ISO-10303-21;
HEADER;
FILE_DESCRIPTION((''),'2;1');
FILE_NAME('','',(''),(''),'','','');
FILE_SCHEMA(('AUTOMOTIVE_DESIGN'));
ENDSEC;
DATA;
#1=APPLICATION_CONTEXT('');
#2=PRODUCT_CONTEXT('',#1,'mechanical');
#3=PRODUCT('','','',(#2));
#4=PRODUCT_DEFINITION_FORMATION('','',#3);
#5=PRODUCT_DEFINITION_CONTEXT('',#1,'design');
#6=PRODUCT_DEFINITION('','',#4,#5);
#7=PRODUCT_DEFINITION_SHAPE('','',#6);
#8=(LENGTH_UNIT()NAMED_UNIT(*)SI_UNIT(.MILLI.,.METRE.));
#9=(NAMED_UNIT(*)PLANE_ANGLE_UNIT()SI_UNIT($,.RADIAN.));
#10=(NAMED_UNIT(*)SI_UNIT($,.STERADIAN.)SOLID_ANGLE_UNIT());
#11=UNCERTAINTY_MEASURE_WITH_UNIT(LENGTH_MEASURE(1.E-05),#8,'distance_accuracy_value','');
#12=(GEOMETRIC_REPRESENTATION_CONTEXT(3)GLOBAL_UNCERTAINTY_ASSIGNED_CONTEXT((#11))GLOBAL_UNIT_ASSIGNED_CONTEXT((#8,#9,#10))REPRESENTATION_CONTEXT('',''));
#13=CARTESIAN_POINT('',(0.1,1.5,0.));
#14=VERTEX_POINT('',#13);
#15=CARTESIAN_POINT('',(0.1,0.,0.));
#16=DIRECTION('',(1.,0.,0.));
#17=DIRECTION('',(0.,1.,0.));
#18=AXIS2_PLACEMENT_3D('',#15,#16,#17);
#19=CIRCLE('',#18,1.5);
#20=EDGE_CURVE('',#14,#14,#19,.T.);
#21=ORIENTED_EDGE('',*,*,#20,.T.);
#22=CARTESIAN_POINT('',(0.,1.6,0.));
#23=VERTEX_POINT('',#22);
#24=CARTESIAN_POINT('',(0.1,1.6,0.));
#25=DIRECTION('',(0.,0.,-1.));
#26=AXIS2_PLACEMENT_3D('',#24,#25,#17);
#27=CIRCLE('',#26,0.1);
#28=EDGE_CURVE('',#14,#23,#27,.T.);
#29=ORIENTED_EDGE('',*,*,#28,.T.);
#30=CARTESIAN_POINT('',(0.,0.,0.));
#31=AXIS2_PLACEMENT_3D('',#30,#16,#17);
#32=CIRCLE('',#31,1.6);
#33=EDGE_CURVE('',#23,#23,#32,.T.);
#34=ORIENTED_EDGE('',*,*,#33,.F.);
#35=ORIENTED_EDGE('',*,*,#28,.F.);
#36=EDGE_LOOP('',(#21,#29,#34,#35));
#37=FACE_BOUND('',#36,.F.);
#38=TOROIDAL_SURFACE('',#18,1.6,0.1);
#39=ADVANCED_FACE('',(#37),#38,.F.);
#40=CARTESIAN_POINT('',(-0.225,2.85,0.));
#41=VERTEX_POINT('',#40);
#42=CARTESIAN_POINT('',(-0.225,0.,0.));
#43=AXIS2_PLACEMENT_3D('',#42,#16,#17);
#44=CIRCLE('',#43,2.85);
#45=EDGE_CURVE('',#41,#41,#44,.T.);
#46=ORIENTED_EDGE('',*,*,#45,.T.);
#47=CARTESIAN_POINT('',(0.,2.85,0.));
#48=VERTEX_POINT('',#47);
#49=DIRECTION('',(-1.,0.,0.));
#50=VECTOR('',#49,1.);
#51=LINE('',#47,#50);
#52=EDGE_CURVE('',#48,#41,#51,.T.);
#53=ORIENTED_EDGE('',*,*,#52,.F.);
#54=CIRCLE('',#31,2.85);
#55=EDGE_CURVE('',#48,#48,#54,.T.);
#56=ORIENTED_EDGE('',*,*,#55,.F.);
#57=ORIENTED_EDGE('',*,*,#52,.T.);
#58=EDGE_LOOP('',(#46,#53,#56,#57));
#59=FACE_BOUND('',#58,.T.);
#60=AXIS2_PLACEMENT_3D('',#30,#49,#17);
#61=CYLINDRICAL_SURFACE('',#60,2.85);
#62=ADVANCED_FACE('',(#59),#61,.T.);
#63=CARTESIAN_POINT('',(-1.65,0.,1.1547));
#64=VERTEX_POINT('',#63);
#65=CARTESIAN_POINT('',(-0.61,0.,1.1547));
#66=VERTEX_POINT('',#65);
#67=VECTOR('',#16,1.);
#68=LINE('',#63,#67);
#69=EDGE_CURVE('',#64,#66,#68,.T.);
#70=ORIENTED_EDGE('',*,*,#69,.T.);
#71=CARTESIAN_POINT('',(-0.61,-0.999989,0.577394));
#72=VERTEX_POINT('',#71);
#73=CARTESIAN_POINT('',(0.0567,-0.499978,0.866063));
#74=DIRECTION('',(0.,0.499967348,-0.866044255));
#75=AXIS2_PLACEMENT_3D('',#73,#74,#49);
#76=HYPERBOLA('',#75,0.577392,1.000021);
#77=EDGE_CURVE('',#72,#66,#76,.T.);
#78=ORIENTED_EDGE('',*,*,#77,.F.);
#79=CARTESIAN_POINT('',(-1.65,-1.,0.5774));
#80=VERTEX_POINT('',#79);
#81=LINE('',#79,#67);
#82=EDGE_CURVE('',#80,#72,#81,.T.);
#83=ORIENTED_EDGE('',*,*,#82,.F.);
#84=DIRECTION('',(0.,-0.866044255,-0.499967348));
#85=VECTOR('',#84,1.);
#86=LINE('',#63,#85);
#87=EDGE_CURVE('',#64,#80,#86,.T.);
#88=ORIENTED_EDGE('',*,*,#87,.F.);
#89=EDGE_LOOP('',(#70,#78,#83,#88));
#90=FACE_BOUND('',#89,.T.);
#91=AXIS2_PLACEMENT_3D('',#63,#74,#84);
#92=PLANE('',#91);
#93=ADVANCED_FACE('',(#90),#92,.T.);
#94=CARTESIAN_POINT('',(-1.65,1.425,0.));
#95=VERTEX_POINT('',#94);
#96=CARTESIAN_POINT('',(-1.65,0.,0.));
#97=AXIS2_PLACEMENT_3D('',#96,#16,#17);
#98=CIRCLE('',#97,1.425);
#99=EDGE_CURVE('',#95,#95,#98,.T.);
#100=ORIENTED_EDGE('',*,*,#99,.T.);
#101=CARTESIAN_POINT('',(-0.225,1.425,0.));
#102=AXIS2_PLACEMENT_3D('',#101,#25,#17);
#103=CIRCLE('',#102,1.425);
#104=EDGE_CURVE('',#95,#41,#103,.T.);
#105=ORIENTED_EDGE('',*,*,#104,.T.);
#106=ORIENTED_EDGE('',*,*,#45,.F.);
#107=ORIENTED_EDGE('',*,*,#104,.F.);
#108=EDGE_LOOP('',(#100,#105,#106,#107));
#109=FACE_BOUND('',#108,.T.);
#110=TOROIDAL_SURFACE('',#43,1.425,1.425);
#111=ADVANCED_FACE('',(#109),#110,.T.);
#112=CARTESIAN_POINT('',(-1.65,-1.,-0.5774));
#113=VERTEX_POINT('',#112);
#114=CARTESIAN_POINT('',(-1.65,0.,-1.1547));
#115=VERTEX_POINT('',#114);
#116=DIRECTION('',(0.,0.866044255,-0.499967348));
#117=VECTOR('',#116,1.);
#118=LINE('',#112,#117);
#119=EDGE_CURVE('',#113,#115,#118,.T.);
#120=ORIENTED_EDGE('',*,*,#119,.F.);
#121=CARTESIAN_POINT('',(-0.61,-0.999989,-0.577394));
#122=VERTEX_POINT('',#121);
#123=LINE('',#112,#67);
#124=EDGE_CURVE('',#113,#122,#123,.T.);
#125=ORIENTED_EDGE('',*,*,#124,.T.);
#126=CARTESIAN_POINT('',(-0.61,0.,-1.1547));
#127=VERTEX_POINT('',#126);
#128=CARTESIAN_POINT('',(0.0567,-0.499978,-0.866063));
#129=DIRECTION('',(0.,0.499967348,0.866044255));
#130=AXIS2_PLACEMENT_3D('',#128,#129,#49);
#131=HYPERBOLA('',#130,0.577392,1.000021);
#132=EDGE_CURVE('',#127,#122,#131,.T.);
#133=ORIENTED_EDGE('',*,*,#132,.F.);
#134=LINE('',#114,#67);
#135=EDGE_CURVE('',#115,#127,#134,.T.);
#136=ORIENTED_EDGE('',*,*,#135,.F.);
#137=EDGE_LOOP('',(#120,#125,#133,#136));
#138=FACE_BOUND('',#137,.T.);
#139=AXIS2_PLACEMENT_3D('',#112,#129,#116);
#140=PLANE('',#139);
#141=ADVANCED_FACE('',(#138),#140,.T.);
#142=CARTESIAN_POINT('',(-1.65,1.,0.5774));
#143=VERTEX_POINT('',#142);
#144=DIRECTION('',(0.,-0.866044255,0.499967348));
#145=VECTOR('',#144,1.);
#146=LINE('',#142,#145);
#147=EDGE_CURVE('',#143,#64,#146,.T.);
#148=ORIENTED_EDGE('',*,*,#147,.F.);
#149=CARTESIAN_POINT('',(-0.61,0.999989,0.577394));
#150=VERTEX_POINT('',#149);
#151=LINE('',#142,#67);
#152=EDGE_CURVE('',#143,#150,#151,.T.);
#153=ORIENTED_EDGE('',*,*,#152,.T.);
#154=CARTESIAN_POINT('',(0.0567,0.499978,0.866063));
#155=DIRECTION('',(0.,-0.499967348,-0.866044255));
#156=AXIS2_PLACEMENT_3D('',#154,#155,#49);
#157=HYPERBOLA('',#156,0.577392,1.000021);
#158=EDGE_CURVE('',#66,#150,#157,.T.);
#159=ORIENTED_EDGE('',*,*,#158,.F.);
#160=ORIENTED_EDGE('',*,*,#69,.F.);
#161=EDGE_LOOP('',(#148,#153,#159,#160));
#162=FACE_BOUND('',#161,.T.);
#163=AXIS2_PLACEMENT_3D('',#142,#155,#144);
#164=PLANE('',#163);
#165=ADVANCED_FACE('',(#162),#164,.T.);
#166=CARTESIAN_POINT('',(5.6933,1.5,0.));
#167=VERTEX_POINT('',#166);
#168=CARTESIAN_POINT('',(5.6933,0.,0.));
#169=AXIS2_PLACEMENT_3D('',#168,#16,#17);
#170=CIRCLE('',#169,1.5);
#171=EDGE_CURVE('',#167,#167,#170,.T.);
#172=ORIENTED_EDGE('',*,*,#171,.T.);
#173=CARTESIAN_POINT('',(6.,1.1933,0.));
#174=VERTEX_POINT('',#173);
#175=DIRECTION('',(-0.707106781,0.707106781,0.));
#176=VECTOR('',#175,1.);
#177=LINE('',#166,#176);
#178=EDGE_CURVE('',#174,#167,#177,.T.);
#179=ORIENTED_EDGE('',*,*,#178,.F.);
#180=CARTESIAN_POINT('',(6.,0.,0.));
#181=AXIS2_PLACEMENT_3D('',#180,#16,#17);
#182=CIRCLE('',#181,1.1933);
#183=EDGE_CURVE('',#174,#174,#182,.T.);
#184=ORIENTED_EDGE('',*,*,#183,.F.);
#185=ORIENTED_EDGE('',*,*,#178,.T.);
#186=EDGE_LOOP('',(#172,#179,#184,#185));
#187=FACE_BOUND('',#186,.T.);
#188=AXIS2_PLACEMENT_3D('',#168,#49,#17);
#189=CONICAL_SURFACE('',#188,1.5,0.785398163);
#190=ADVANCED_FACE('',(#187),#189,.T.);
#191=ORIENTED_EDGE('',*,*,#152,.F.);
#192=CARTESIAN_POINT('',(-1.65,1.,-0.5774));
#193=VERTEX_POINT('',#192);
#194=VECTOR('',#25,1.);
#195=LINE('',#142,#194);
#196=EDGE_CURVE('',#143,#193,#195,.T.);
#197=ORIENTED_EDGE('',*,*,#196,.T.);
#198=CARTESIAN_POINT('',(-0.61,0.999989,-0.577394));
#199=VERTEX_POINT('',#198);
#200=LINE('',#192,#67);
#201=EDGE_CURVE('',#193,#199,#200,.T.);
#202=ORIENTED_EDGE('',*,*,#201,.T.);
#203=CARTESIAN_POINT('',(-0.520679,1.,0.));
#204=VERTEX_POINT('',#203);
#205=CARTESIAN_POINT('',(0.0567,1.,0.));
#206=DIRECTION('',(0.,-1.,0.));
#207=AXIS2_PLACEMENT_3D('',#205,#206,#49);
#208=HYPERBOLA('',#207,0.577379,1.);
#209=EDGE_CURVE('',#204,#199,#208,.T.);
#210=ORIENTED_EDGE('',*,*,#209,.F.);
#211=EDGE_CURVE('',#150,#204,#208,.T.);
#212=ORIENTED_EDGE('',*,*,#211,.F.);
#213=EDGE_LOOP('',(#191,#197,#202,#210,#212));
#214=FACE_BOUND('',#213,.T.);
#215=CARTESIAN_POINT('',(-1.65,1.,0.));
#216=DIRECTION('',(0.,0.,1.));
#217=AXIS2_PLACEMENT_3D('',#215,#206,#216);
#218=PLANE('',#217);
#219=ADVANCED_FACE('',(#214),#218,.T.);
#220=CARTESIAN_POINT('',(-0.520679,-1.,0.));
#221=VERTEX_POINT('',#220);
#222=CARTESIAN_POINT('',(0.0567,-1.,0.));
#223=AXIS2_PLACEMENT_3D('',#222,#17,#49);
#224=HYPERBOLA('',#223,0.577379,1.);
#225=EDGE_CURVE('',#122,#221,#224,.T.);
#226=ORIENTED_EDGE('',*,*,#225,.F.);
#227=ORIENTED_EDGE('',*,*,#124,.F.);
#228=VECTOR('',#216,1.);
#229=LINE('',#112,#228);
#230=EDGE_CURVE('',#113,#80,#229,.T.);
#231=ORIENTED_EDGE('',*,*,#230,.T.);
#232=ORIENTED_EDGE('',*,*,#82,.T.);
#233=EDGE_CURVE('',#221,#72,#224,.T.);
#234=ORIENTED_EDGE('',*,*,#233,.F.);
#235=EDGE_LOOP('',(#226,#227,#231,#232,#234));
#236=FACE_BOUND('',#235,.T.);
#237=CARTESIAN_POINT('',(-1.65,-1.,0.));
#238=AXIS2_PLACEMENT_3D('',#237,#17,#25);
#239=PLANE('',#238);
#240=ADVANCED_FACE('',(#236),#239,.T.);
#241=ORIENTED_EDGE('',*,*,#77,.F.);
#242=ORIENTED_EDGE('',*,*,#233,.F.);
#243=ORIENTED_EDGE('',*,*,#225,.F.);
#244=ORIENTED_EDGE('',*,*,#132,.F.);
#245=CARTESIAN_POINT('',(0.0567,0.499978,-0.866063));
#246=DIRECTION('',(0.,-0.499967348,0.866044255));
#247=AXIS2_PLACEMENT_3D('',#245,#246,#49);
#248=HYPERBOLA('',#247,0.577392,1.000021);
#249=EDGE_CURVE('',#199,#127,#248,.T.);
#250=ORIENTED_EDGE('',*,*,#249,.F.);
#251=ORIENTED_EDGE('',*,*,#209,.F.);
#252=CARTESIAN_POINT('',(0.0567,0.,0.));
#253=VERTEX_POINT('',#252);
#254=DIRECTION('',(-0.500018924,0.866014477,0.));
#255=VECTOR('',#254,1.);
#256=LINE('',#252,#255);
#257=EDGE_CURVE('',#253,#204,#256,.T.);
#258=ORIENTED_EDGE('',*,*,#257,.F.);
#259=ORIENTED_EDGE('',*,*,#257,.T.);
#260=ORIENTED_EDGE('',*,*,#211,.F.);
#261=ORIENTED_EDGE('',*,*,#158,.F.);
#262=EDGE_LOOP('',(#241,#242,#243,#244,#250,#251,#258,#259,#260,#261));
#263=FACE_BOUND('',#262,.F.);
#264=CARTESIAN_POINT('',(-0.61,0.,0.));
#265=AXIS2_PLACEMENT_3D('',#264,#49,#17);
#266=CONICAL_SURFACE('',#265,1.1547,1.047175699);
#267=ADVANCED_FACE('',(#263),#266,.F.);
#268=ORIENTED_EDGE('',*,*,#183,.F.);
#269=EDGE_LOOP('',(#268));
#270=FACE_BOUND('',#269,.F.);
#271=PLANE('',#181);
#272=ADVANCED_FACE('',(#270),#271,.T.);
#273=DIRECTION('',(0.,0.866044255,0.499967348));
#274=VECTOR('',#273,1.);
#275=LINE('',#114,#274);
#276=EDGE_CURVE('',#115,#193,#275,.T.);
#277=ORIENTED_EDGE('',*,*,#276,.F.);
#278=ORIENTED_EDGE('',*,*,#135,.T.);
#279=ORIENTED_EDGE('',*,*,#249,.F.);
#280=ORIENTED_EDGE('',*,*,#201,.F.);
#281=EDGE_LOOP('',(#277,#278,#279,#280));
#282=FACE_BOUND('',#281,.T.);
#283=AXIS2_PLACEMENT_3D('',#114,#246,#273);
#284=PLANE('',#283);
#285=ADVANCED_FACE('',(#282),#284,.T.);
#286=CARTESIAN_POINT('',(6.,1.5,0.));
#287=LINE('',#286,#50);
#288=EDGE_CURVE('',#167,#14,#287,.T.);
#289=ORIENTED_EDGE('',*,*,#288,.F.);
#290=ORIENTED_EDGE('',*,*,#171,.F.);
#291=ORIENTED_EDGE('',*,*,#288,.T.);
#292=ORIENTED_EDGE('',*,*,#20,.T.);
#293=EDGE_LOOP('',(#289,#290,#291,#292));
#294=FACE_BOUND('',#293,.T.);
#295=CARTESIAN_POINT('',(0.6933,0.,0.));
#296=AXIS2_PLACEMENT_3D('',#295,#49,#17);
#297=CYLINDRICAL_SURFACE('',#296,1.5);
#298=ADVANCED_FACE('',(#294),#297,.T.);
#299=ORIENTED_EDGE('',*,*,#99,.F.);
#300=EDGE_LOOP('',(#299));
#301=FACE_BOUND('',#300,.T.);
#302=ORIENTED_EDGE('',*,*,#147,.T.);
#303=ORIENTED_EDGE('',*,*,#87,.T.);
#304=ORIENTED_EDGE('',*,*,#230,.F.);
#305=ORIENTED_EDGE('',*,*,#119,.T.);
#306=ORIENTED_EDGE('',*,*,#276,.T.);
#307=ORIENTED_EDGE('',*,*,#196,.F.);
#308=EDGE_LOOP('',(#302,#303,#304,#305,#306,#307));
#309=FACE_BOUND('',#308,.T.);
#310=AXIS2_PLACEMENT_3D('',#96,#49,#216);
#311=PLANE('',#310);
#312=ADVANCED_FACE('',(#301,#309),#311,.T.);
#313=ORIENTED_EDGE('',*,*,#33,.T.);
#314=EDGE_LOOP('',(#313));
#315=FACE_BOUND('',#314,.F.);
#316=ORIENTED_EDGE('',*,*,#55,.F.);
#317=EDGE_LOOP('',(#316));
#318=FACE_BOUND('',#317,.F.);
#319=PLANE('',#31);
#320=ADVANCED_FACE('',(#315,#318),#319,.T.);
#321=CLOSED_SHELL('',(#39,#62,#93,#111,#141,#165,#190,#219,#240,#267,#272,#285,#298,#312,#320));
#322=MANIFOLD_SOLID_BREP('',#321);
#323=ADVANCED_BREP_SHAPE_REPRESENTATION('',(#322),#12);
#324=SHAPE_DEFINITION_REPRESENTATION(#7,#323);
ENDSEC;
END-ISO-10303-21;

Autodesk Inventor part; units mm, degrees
ref_plane "YZ Plane" through (0, 0, 0) normal (1, 0, 0) x (0, 1, 0)
ref_plane "XZ Plane" through (0, 0, 0) normal (0, 1, 0) x (-1, 0, 0)
sketch "Sketch1" plane through (0, 0, 0) normal (0, 0, 1) x (1, 0, 0)
  line L0 (0.0567, 0) -> (6, 0)
  line L1 (6, 0) -> (6, 1.5)
  line L2 (6, 1.5) -> (1, 1.5)
  line L3 (1, 1.5) -> (0.6933, 1.5)
  line L4 (0.6933, 1.5) -> (0, 1.5)
  line L5 (0, 1.5) -> (0, 2.85)
  line L6 (0, 2.85) -> (-1.65, 2.85)
  line L7 (-1.65, 2.85) -> (-1.65, 1.1547)
  line L8 (-1.65, 1.1547) -> (-0.61, 1.1547)
  line L9 (-0.61, 1.1547) -> (0.0567, 0)
  line L10 (-3.18, 0) -> (7.53, 0) projected
  line L11 (0, -0.57) -> (0, 3.42) projected
  line L12 (1, 1.5) -> (0, 1.5) construction
  dimension "d0" = 5
  dimension "d1" = 0.3067
  dimension "d2" = 1.65
  dimension "d3" = 1.04
  dimension "d4" = 60
  dimension "d5" = 3
  dimension "d6" = 3
  dimension "d7" = 2.3094
  dimension "d8" = 5.7
  dimension "d19" = 6
revolve "Body" add sketch "Sketch1" angle 360 about axis through (0.0567, 0, 0) along (1, 0, 0) contours L9 L11 L4 L3 L2 L1 L0 | L9 L8 L7 L6 L5 L11
sketch "Sketch2" plane through (-1.65, 0, 0) normal (-1, 0, 0) x (0, 0, 1)
  circle A0 centre (0, 0) radius 1.1547 projected
  line L0 (0, -3.99) -> (0, 3.99) projected
  line L1 (-3.99, 0) -> (3.99, 0) projected
  line L2 (1.1547, 0) -> (0.5774, -1)
  line L3 (0.5774, -1) -> (-0.5774, -1)
  line L4 (-0.5774, -1) -> (-1.1547, 0)
  line L5 (-1.1547, 0) -> (-0.5774, 1)
  line L6 (-0.5774, 1) -> (0.5774, 1)
  line L7 (0.5774, 1) -> (1.1547, 0)
extrude "Slot" add sketch "Sketch2" against normal up to next contours L7 A0 | A0 L2 | L6 L0 A0 | A0 L0 L3 | L0 L6 A0 | A0 L3 L0 | L4 A0 | A0 L5
fillet "Fillet1" radius 1.425 1 edges at (-1.65, -2.85, 0)
thread "Thread" size "M3x0.5" class "4g6g" standard "ANSI Metric M Profile" length 5
chamfer "Chamfer1" distance 0.3067 distance2 0.3067 1 edges at (6, -1.5, 0) measured on face at (6, -0.2617, -0.7882)
fillet "Fillet2" radius 0.1 1 edges at (0, -1.5, 0)
ref_plane "Work Plane1" through (30, 0, 0) normal (0, -0.5, 0.8660254) x (1, 0, 0)
equation "\"d16\" = RR"
equation "\"d12\" = GEL"
equation "\"d14\" = -0.5 * SPD + 0.5 * GD"
equation "\"d15\" = GUL"
equation "\"d29\" = R"
equation "\"d0\" = GEL"
equation "\"d1\" = GAL"
equation "\"d2\" = KOH"
equation "\"d3\" = INTI"
equation "\"d5\" = GD"
equation "\"d6\" = BDM"
equation "\"d7\" = 1.1547 * SW"
equation "\"d8\" = KOD"
equation "\"d19\" = NLG"
equation "\"GD\" = NND"
equation "\"NLG\" = 6"
equation "\"GEL\" = 5"
equation "\"KOD\" = 5.7"
equation "\"KOH\" = 1.65"
equation "\"INTI\" = 1.04"
equation "\"GAL\" = 0.61345 * PTC"
equation "\"GUL\" = 0.61345 * PTC"
equation "\"BDM\" = NND"
equation "\"SW\" = 2"
equation "\"RR\" = 1.425"
equation "\"SPD\" = 2.38655"
equation "\"d28\" = R"
equation "\"R\" = 0.1"
equation "\"TOA\" = 30deg"
equation "\"THREADDIA\" = 3"
equation "\"KOD1\" = KOD - 2 * RR"
equation "\"PTC\" = 0.5"
equation "\"NND\" = 3"
equation "\"E0\" = 1.155 * SW"
equation "\"GD1\" = THREADDIA - 1.2269 * PTC"
properties part number "ANSI B18.3.4M - M3 x 0.5 x 6, BHSBHCSM" material "Steel, Mild"
